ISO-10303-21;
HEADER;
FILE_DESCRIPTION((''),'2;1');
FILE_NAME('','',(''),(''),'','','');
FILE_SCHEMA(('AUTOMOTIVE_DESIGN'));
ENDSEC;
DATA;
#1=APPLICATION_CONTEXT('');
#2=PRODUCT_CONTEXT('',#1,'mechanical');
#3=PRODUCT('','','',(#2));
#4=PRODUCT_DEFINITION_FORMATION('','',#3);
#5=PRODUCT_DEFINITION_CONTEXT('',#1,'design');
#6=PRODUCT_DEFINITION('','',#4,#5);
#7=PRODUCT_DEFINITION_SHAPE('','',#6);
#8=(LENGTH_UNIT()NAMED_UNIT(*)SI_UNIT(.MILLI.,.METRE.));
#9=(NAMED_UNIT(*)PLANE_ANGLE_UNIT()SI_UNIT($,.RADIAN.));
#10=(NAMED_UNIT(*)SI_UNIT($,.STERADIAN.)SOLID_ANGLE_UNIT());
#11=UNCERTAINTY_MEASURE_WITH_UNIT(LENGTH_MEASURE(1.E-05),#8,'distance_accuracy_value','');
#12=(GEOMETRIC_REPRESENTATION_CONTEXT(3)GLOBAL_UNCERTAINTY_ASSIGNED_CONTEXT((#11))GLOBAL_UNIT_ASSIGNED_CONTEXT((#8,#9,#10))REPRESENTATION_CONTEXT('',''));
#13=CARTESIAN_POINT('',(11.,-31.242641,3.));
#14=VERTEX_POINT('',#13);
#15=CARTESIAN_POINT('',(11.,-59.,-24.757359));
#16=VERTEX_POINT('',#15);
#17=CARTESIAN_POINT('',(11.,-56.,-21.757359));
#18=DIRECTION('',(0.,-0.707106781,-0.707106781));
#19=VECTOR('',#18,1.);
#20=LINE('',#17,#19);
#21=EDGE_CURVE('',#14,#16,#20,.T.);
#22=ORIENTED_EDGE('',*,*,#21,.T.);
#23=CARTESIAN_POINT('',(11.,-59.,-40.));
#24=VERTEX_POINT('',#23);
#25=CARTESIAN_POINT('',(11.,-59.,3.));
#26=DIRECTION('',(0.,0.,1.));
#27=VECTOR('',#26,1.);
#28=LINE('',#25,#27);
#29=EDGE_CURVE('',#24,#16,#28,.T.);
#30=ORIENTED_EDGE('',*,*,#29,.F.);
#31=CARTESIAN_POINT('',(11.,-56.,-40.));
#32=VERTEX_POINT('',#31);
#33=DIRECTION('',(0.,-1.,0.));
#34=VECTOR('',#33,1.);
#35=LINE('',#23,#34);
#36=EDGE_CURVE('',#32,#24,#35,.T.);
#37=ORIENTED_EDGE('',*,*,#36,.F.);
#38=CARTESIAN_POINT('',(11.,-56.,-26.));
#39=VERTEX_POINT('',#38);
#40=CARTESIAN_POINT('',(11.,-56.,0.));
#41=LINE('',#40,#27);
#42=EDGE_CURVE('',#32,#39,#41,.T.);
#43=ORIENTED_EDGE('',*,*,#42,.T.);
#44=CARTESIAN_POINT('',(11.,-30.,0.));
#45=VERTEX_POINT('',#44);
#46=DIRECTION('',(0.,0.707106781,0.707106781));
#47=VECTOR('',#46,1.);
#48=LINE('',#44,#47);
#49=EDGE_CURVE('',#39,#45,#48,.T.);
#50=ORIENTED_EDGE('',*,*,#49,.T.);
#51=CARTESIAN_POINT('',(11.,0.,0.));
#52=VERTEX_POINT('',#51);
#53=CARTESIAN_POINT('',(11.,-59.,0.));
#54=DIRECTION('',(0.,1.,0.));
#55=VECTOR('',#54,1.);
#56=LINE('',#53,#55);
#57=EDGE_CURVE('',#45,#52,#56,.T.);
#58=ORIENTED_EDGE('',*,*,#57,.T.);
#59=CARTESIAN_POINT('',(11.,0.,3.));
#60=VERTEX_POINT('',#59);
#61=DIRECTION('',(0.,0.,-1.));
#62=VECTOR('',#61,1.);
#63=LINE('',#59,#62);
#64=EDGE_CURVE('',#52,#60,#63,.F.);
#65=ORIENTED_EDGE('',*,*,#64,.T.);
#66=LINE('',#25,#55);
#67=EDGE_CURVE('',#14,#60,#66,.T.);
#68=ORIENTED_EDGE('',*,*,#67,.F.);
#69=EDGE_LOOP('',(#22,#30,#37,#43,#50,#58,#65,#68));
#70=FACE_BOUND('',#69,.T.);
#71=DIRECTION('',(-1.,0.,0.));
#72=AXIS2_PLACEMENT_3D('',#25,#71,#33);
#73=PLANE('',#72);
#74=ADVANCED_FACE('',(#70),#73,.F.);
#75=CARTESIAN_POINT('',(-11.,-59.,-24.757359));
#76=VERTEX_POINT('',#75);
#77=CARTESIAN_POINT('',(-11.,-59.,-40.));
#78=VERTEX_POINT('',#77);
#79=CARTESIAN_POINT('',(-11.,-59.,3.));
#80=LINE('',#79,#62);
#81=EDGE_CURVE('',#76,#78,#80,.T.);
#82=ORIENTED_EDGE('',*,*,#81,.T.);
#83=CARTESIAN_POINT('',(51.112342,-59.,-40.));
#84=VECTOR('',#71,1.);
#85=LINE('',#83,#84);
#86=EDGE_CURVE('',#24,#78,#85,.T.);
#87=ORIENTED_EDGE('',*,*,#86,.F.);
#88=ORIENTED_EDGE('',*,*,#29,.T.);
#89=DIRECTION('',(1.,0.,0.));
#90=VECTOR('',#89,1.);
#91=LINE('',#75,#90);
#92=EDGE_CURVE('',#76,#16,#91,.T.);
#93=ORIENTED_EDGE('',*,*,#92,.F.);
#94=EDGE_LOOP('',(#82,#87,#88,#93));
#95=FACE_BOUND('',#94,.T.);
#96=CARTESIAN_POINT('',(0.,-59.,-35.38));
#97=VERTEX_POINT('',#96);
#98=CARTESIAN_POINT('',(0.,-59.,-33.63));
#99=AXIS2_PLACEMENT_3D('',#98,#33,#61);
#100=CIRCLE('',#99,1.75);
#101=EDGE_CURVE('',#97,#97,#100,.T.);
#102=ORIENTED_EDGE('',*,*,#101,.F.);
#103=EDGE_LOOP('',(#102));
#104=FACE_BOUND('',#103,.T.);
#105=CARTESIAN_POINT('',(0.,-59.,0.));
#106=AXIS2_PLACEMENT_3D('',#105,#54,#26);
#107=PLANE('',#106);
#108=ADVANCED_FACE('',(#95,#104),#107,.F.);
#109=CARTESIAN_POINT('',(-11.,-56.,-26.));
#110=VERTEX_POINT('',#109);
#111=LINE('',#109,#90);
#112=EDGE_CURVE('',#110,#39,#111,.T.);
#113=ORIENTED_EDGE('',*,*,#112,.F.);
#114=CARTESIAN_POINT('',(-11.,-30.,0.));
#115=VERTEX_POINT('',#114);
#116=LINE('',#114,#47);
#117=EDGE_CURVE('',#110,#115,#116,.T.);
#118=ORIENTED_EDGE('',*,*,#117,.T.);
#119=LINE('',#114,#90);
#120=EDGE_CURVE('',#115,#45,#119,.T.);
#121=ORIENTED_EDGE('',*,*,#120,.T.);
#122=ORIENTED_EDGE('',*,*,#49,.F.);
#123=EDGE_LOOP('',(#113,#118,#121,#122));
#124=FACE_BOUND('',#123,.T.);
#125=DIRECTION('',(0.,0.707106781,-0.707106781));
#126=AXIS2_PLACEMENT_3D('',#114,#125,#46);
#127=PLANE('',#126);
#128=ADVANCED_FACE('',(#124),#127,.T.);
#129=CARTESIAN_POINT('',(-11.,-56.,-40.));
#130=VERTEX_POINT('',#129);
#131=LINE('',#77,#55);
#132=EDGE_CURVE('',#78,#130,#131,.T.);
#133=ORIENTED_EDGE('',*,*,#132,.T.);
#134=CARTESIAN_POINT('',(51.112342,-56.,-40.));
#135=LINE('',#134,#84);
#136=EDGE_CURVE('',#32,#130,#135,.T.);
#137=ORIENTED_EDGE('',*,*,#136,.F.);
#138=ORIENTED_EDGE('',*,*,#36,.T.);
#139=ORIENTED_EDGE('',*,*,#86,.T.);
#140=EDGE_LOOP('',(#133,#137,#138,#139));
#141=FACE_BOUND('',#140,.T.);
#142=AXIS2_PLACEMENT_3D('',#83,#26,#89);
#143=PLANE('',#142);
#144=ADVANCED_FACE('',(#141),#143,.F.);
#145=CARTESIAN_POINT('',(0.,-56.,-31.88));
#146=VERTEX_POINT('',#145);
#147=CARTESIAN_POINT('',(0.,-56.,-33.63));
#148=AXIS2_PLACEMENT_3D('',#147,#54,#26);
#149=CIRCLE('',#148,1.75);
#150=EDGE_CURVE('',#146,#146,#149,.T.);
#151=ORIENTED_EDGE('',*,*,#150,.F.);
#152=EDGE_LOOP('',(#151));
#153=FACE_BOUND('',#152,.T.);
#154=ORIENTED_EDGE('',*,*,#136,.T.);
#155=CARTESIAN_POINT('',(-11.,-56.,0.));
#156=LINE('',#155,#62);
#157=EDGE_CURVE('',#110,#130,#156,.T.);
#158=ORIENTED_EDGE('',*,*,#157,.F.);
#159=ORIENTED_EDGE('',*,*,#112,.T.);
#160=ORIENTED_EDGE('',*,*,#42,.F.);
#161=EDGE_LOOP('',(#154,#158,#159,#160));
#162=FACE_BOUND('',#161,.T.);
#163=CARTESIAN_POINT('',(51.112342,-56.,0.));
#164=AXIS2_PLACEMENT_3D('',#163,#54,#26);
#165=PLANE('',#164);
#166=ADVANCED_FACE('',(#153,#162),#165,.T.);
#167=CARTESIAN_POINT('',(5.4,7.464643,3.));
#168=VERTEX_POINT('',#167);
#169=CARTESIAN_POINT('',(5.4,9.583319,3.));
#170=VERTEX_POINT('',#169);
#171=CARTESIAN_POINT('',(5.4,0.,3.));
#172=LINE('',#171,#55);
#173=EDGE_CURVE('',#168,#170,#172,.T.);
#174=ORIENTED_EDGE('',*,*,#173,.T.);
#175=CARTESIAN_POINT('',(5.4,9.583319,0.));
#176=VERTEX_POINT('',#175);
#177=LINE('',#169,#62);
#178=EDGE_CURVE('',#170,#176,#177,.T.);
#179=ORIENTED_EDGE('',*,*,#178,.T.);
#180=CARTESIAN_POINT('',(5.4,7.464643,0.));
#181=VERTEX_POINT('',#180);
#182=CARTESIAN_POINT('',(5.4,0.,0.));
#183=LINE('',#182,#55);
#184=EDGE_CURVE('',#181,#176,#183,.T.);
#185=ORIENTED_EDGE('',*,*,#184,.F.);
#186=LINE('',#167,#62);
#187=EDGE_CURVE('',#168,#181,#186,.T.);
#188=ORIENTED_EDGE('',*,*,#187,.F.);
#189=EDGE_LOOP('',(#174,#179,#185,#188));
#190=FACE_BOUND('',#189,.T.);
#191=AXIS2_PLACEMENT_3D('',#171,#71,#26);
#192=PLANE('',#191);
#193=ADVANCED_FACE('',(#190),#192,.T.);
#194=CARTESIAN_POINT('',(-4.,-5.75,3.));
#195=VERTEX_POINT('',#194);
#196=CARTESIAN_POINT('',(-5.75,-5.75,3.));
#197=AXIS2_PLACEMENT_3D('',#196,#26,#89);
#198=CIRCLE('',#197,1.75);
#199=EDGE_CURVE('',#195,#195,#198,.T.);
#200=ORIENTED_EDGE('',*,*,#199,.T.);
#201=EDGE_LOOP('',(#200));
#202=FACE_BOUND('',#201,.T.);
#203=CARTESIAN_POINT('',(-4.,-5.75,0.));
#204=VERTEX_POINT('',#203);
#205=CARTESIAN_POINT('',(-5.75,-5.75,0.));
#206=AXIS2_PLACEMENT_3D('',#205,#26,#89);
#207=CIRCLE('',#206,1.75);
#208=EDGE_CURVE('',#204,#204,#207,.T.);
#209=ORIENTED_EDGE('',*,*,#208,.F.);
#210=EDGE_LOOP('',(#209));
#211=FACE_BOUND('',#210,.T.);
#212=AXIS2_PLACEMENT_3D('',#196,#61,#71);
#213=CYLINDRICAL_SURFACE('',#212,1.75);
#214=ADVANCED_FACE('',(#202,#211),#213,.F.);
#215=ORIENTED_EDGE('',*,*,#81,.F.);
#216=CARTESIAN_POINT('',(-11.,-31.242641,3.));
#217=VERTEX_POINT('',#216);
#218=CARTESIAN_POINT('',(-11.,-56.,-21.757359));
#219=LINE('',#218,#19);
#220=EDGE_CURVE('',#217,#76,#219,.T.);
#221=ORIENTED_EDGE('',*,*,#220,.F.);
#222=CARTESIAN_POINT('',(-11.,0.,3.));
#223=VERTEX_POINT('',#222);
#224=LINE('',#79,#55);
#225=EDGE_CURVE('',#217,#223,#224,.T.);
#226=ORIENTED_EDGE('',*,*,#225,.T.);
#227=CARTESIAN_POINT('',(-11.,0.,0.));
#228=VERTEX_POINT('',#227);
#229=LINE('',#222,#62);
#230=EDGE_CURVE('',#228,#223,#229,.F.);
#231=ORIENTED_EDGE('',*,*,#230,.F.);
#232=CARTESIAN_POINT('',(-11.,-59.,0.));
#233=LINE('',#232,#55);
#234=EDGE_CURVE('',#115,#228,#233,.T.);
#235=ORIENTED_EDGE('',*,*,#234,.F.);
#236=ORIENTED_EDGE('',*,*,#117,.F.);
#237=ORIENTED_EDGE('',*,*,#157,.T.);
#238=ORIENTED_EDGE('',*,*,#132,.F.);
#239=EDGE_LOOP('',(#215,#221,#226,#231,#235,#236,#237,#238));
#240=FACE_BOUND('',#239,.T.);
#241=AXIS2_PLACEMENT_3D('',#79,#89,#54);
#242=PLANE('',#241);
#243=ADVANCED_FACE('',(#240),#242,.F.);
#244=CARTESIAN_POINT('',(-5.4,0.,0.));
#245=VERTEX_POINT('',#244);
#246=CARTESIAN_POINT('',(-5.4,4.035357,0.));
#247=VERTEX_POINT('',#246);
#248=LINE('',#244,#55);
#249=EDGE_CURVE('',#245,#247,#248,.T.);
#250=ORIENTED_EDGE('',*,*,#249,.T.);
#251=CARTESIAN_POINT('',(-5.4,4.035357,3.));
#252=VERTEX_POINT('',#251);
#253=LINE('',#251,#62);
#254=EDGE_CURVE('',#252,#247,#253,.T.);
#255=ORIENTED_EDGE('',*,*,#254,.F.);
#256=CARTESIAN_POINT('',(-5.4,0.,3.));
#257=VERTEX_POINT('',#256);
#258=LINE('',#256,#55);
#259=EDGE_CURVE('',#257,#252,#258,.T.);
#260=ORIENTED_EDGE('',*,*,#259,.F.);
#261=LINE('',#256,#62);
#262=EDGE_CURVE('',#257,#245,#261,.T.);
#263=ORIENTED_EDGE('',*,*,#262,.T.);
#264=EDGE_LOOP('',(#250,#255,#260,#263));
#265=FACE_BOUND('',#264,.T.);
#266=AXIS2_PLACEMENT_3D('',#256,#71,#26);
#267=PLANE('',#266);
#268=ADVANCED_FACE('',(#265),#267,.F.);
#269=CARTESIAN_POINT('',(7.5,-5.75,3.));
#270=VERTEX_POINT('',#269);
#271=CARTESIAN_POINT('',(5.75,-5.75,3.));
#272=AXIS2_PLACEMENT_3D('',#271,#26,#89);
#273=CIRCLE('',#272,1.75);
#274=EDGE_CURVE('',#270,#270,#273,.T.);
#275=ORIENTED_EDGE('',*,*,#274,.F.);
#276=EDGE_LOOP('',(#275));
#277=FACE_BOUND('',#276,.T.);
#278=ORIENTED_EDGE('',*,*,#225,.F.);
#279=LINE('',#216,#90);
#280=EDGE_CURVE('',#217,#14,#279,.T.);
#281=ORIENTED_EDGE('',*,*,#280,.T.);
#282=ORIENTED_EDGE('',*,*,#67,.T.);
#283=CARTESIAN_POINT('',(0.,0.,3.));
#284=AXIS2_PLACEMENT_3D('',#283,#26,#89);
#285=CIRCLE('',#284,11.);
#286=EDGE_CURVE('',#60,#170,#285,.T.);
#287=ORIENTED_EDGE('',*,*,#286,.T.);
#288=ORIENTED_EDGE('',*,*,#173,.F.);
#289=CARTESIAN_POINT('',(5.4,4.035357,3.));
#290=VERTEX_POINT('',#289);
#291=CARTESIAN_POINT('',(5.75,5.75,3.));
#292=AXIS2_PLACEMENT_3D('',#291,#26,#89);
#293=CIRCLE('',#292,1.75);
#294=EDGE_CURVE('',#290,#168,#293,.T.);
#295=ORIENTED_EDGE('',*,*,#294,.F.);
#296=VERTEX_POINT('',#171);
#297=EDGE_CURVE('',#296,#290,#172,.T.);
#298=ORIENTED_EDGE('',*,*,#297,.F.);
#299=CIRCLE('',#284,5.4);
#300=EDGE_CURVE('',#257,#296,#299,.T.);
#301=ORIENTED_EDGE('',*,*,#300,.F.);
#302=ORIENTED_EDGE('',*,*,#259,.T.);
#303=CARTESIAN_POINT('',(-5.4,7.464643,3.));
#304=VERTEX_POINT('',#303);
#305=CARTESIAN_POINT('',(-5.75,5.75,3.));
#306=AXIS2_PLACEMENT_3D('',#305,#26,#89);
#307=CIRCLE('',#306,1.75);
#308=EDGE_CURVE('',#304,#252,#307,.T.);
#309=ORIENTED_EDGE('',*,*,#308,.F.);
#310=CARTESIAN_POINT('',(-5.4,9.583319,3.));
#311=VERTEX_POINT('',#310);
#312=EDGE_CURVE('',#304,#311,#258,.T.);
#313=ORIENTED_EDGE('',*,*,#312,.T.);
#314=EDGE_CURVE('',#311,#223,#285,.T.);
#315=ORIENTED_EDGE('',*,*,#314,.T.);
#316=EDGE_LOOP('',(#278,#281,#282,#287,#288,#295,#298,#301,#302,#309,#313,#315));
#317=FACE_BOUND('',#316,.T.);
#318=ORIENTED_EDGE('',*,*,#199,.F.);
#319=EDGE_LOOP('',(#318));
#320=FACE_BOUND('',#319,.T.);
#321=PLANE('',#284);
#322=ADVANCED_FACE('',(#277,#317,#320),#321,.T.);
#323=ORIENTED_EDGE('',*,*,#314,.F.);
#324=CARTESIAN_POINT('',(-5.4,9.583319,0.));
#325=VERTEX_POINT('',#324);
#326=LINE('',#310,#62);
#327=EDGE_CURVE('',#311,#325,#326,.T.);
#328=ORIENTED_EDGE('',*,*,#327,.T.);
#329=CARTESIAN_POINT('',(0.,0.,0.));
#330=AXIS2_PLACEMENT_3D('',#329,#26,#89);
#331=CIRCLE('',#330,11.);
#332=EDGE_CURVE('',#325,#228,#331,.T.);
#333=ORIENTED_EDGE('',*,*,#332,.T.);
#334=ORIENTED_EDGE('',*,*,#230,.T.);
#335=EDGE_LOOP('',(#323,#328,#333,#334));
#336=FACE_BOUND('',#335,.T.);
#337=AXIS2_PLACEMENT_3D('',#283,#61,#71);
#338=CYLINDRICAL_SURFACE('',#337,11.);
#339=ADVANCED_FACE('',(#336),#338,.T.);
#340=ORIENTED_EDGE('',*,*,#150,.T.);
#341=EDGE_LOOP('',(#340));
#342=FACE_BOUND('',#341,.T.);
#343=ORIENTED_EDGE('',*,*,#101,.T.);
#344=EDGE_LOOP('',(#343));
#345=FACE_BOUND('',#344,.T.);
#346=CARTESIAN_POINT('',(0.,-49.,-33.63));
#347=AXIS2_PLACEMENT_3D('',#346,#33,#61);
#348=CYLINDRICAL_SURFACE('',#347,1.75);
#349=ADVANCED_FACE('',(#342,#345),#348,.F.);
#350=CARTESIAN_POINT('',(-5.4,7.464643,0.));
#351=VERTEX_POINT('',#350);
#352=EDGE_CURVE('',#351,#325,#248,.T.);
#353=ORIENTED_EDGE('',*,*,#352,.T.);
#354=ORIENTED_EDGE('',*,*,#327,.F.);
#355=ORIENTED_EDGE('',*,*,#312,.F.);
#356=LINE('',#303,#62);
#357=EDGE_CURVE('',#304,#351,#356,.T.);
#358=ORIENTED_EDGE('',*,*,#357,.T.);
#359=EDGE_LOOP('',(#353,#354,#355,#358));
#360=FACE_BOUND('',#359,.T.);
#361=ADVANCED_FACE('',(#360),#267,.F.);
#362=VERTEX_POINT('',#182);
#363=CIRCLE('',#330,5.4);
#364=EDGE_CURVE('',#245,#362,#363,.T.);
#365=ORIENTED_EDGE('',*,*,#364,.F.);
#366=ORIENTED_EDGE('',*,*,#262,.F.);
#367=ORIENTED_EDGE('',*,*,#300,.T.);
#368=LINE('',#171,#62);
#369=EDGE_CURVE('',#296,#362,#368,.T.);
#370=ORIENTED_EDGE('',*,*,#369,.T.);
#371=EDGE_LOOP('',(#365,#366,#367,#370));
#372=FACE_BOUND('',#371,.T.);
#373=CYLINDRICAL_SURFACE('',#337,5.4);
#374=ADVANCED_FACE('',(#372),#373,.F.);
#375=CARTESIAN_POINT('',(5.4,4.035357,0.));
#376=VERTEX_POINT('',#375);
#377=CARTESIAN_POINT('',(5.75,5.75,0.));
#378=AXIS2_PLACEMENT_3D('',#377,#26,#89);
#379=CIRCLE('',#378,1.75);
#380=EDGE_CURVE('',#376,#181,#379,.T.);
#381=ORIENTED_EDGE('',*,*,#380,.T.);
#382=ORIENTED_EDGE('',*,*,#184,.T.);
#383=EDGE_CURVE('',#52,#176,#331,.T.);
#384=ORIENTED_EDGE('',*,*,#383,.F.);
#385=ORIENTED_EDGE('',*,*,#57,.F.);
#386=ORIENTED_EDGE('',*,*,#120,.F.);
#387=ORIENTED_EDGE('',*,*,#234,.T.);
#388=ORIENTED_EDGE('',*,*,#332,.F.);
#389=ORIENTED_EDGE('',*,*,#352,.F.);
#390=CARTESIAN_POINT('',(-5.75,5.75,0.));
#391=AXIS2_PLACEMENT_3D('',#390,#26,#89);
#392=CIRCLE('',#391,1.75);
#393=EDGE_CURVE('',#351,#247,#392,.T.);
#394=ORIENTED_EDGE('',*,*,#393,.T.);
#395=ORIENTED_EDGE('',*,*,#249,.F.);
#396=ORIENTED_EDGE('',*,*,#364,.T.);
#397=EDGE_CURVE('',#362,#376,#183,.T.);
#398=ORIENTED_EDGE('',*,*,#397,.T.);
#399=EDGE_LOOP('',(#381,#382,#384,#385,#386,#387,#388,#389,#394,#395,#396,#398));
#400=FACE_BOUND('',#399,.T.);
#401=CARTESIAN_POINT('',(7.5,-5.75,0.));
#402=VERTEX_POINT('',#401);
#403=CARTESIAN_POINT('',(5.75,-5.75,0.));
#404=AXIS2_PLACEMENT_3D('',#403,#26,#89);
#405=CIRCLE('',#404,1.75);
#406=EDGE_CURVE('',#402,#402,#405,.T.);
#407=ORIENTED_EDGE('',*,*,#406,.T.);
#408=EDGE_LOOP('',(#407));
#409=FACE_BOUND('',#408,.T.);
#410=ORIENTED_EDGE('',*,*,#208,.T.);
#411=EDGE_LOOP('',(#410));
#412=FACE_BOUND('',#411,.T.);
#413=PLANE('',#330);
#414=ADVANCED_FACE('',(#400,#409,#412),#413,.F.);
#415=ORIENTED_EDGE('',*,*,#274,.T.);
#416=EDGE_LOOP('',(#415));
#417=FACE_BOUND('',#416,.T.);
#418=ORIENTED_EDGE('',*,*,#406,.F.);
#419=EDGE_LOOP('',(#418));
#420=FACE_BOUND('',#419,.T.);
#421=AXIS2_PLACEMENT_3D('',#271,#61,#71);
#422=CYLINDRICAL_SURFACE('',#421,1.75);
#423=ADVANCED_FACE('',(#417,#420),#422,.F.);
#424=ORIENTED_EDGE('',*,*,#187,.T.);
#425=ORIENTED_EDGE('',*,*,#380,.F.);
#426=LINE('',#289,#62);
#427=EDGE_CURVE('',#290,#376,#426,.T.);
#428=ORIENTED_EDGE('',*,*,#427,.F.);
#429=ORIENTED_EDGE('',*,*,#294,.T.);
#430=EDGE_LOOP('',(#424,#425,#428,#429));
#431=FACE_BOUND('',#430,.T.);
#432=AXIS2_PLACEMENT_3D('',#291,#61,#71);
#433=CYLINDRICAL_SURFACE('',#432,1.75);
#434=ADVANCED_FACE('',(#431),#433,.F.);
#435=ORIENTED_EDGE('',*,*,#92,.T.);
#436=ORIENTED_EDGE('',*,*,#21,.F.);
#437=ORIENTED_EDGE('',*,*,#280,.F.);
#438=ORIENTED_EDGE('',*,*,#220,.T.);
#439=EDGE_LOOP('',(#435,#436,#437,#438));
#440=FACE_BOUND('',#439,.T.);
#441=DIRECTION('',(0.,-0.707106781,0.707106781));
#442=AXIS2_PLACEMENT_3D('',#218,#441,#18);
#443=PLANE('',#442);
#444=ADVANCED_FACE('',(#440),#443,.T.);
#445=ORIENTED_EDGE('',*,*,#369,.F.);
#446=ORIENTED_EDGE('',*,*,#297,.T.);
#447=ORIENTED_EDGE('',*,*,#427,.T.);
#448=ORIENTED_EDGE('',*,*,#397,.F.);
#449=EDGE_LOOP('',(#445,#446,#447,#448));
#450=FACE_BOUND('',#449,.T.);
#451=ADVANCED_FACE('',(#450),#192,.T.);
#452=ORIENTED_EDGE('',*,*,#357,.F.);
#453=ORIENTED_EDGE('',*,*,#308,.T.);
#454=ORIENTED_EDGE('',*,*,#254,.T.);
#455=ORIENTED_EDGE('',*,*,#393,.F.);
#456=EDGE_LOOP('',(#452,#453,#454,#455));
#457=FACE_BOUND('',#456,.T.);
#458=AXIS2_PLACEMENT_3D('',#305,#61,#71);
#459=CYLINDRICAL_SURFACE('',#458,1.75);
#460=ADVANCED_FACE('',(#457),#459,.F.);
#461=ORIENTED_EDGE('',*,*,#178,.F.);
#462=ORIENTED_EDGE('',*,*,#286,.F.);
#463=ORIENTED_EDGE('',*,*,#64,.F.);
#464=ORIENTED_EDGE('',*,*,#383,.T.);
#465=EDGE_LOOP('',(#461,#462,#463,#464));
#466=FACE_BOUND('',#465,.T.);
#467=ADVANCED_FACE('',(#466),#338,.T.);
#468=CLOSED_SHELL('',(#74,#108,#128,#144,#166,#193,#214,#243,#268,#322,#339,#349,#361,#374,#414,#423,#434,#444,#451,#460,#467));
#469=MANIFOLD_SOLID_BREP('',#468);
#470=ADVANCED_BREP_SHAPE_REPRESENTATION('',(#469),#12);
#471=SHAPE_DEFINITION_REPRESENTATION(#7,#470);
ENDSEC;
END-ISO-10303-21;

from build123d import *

# Parameters (mm, degrees)
SKETCH1_R           = 1.75
BOSS_EXTRUDE1_DEPTH = 3
BOSS_EXTRUDE2_DEPTH = 3
SKETCH4_W           = 40
SKETCH4_H           = 3
BOSS_EXTRUDE3_DEPTH = 22
SKETCH5_R           = 1.75
CUT_EXTRUDE1_DEPTH  = 10
BOSS_EXTRUDE4_DEPTH = 1
BOSS_EXTRUDE5_DEPTH = 22
CUT_EXTRUDE2_DEPTH  = 75.598927606


# Read off the part's stored shape, not the designer's step: Boss-Extrude2
with BuildPart() as part:
    # Sketch1 → Boss-Extrude1 (new body)
    with BuildSketch(Plane.XY):
        with BuildLine():
            Line((5.4, 4.03535718), (5.4, 0))
            ThreePointArc((5.4, 0), (0, -5.4), (-5.4, 0))
            Line((-5.4, 0), (-5.4, 4.03535718))
            ThreePointArc((-5.4, 4.03535718), (-7.5, 5.75), (-5.4, 7.46464282))
            Line((-5.4, 7.46464282), (-5.4, 9.583318841))
            ThreePointArc((-5.4, 9.583318841), (0, -11), (5.4, 9.583318841))
            Line((5.4, 9.583318841), (5.4, 7.46464282))
            ThreePointArc((5.4, 7.46464282), (6.856797181, 7.105544171), (7.5, 5.75))
            ThreePointArc((7.5, 5.75), (6.856797181, 4.394455829), (5.4, 4.03535718))
        make_face()
        with Locations((-5.75, -5.75)):
            Circle(SKETCH1_R, mode=Mode.SUBTRACT)
        with Locations((5.75, -5.75)):
            Circle(SKETCH1_R, mode=Mode.SUBTRACT)
    extrude(amount=BOSS_EXTRUDE1_DEPTH)

    # Boss-Extrude2 outline → Boss-Extrude2 (add)
    with BuildSketch(Plane.XY):
        with BuildLine():
            Line((-11, 0), (-11, -59))
            Line((-11, -59), (11, -59))
            Line((11, -59), (11, 0))
            ThreePointArc((11, 0), (0, -11), (-11, 0))
        make_face()
    extrude(amount=BOSS_EXTRUDE2_DEPTH)

    # Sketch4 → Boss-Extrude3 (add)
    with BuildSketch(Plane.ZY.offset(11)):
        with Locations((-20, -57.5)):
            Rectangle(SKETCH4_W, SKETCH4_H)
    extrude(amount=-BOSS_EXTRUDE3_DEPTH)

    # Sketch5 → Cut-Extrude1 (cut)
    with BuildSketch(Plane(origin=(0, -59, 0), x_dir=(-1, 0, 0), z_dir=(0, -1, 0))):
        with Locations(Location((0, 33.63, 0), (0, 0, 90))):
            Circle(SKETCH5_R)
    extrude(amount=-CUT_EXTRUDE1_DEPTH, mode=Mode.SUBTRACT)

    # Sketch6 → Boss-Extrude4 (add)
    with BuildSketch(Plane.ZY.offset(11)):
        Polygon((-20, -56), (0, -36), (0, -56), align=None)
    boss_extrude4 = extrude(amount=-BOSS_EXTRUDE4_DEPTH)

    # Mirror1: Boss-Extrude4 across plane
    add(boss_extrude4.mirror(Plane(origin=(0, 0, 0), x_dir=(0, 0, 1), z_dir=(1, 0, 0))))

    # Sketch7 → Boss-Extrude5 (add, through all)
    with BuildSketch(Plane(origin=(11, 0, 0), x_dir=(0, 0, -1), z_dir=(1, 0, 0))):
        Polygon((0, -30), (26, -56), (21.757359313, -56), (0, -34.242640687), align=None)
    extrude(amount=-BOSS_EXTRUDE5_DEPTH)

    # Sketch8 → Cut-Extrude2 (cut, through all)
    with BuildSketch(Plane(origin=(11, 0, 0), x_dir=(0, 0, -1), z_dir=(1, 0, 0))):
        Polygon((10.878679656, -45.121320344), (24.757359313, -59), (-3, -59), (-3, -31.242640687), align=None)
    extrude(amount=-CUT_EXTRUDE2_DEPTH, mode=Mode.SUBTRACT)


solid = part.part
